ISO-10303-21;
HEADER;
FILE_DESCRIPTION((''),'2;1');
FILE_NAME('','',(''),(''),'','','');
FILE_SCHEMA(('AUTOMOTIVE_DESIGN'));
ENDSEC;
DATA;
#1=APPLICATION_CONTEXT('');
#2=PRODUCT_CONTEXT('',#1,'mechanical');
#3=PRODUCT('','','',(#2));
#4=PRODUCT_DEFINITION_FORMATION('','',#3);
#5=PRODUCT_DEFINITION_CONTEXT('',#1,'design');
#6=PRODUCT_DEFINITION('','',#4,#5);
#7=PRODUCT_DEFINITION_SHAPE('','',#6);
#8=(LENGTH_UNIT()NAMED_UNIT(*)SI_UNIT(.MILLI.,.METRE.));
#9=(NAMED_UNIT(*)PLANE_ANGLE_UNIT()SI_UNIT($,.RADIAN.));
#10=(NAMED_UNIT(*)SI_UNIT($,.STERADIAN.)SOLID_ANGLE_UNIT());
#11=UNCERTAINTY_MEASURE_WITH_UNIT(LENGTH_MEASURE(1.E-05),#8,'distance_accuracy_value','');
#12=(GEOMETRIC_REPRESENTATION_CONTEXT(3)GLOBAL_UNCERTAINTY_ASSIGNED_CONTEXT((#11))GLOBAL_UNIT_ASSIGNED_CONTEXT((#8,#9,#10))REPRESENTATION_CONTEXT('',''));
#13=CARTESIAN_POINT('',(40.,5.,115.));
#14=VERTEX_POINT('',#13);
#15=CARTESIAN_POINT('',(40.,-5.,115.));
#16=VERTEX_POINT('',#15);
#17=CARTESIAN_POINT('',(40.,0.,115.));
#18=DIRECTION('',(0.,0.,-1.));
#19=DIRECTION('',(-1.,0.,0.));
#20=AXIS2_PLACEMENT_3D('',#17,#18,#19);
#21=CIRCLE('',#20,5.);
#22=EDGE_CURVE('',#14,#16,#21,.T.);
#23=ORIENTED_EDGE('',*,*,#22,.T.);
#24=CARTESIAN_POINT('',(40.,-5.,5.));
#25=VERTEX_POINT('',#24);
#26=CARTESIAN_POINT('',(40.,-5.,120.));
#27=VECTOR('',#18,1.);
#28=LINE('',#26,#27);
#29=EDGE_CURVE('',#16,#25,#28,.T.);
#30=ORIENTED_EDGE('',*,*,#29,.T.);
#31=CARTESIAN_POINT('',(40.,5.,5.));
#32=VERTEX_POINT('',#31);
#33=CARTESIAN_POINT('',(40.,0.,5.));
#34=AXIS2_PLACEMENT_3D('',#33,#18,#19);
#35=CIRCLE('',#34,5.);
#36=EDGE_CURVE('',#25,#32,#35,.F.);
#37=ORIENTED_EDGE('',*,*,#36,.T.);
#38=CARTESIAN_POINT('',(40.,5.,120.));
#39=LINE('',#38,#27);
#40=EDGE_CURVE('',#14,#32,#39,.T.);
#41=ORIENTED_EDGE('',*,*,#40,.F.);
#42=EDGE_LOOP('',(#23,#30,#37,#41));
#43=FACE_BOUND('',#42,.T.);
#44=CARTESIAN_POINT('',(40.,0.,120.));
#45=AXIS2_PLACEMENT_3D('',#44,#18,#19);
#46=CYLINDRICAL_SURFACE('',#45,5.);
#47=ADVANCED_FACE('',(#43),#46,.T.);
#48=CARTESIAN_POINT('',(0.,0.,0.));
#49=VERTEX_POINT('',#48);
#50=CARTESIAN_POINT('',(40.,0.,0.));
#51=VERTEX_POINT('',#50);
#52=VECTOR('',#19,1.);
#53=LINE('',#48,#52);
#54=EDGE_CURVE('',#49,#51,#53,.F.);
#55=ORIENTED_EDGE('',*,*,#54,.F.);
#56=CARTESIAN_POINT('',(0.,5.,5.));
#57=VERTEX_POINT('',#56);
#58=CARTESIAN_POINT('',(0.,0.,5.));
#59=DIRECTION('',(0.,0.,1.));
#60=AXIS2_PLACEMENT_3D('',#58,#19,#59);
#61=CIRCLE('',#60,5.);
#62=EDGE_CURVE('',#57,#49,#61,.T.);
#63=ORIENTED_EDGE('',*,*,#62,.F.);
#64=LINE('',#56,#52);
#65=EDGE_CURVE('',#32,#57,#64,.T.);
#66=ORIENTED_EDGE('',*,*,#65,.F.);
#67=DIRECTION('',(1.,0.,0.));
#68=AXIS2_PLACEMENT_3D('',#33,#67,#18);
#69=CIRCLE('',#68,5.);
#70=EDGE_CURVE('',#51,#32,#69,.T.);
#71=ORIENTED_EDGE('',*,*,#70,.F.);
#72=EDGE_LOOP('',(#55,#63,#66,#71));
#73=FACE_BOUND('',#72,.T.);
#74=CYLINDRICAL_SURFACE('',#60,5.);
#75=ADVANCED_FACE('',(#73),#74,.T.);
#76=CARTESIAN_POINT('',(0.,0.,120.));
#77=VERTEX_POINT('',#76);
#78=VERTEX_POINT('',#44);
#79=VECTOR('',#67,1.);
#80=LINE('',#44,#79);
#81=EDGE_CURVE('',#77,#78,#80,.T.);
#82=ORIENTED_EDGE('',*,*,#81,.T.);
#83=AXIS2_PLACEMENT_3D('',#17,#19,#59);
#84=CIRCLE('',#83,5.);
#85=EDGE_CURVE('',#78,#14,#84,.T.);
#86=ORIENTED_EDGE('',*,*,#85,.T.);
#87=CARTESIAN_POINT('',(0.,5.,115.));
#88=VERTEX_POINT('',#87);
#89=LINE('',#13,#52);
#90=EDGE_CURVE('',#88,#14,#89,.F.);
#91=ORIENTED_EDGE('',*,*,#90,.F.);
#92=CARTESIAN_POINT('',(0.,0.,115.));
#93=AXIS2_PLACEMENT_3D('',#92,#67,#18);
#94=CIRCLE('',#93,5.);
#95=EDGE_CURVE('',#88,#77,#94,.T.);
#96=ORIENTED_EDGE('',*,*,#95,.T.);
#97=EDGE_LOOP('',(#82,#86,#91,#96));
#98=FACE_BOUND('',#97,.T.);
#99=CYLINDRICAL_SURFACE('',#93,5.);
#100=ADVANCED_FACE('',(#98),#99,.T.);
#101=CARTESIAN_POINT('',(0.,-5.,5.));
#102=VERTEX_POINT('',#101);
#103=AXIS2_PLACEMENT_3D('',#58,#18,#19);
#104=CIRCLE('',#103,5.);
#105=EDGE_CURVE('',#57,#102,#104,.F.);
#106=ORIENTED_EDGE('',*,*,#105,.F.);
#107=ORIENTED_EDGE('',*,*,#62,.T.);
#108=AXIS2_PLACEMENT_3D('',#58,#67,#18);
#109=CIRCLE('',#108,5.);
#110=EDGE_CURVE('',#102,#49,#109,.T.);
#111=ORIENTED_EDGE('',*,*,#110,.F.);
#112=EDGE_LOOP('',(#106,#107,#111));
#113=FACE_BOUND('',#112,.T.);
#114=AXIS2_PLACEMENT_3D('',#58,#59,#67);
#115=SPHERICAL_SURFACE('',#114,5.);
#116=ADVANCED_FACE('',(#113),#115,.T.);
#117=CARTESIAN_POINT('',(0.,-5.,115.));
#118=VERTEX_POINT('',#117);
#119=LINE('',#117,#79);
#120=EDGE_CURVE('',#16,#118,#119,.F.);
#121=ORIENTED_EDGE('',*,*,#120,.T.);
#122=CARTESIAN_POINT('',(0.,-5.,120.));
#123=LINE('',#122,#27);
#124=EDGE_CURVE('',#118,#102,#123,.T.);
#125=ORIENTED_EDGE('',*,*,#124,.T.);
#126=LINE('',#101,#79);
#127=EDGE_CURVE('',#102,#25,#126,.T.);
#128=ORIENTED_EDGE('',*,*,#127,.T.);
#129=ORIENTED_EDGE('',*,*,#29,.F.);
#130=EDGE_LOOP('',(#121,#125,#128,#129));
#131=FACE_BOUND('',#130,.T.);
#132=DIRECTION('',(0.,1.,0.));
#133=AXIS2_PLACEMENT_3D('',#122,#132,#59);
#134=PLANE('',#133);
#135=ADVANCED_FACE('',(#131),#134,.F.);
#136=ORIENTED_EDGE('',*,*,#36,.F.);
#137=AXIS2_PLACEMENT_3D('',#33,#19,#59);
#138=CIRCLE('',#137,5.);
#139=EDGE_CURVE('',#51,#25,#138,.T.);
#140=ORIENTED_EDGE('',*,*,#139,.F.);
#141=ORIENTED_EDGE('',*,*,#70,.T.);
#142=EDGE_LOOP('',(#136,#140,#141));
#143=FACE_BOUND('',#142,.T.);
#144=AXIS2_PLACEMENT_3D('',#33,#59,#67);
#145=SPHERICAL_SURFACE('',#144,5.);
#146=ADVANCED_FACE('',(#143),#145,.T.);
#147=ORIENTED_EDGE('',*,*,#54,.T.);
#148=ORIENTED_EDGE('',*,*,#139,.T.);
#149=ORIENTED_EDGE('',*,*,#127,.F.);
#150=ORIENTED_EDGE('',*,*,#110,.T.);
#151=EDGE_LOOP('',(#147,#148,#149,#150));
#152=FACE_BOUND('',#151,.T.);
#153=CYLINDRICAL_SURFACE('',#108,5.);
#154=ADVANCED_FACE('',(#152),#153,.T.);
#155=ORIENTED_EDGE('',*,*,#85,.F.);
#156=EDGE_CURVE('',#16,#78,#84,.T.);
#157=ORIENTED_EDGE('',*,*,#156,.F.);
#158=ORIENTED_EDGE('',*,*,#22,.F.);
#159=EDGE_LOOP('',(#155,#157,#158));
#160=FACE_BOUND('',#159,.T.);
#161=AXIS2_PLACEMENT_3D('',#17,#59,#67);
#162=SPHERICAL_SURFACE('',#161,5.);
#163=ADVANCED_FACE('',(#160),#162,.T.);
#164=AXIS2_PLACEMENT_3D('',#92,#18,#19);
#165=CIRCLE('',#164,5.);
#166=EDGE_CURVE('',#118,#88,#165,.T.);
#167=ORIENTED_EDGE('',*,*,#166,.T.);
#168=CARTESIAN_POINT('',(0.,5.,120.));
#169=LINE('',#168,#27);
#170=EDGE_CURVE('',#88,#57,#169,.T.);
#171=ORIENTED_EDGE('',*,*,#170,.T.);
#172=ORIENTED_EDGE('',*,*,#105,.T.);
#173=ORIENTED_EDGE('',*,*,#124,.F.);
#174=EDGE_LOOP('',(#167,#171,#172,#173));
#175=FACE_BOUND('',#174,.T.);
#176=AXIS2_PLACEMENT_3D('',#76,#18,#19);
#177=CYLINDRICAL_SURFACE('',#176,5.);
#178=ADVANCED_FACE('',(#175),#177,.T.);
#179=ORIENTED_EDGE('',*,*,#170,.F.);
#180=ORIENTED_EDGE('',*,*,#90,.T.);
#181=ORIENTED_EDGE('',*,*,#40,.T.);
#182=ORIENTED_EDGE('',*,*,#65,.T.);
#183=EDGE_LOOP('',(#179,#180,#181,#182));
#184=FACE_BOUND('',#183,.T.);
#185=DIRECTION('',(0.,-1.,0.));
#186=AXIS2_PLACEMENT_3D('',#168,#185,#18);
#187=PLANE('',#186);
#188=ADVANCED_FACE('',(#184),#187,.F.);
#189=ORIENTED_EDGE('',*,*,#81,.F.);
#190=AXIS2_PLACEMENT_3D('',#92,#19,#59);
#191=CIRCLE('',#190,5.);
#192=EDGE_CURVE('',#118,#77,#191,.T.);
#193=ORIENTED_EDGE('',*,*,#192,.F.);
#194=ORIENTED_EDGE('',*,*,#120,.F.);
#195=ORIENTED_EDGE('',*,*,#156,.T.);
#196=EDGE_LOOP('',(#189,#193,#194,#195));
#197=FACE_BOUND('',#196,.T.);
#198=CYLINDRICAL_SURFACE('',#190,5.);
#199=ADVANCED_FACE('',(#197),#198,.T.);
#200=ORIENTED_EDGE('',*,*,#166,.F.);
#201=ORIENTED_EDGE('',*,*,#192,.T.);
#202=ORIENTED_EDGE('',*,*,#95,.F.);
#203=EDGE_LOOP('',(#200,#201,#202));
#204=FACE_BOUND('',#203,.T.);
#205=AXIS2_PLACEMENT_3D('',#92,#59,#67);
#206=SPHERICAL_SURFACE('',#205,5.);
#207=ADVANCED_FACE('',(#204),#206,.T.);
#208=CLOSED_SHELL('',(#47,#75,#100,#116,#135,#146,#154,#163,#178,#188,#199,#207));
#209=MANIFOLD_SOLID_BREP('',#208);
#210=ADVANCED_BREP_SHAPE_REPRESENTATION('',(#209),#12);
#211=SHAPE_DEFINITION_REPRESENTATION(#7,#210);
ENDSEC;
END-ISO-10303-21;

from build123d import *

# Parameters (mm, degrees)
BOSS_EXTRUDE1_DEPTH = 120
FILLET1_R           = 5


with BuildPart() as part:
    # Sketch1 → Boss-Extrude1 (new body)
    with BuildSketch(Plane.XY):
        with BuildLine():
            Line((0, 5), (40, 5))
            ThreePointArc((40, 5), (45, 0), (40, -5))
            Line((40, -5), (0, -5))
            ThreePointArc((0, -5), (-5, 0), (0, 5))
        make_face()
    extrude(amount=BOSS_EXTRUDE1_DEPTH)

    # Fillet1
    fillet1_edges = [part.edges().sort_by_distance(p)[0] for p in [
        (45, 0, 120),
        (20, 5, 120),
        (-5, 0, 120),
        (20, 5, 0),
        (45, 0, 0),
        (20, -5, 0),
        (-5, 0, 0),
        (20, -5, 120),
    ]]
    fillet(fillet1_edges, radius=FILLET1_R - 0.0001)  # a hair under: the kernel refuses the full size


solid = part.part
